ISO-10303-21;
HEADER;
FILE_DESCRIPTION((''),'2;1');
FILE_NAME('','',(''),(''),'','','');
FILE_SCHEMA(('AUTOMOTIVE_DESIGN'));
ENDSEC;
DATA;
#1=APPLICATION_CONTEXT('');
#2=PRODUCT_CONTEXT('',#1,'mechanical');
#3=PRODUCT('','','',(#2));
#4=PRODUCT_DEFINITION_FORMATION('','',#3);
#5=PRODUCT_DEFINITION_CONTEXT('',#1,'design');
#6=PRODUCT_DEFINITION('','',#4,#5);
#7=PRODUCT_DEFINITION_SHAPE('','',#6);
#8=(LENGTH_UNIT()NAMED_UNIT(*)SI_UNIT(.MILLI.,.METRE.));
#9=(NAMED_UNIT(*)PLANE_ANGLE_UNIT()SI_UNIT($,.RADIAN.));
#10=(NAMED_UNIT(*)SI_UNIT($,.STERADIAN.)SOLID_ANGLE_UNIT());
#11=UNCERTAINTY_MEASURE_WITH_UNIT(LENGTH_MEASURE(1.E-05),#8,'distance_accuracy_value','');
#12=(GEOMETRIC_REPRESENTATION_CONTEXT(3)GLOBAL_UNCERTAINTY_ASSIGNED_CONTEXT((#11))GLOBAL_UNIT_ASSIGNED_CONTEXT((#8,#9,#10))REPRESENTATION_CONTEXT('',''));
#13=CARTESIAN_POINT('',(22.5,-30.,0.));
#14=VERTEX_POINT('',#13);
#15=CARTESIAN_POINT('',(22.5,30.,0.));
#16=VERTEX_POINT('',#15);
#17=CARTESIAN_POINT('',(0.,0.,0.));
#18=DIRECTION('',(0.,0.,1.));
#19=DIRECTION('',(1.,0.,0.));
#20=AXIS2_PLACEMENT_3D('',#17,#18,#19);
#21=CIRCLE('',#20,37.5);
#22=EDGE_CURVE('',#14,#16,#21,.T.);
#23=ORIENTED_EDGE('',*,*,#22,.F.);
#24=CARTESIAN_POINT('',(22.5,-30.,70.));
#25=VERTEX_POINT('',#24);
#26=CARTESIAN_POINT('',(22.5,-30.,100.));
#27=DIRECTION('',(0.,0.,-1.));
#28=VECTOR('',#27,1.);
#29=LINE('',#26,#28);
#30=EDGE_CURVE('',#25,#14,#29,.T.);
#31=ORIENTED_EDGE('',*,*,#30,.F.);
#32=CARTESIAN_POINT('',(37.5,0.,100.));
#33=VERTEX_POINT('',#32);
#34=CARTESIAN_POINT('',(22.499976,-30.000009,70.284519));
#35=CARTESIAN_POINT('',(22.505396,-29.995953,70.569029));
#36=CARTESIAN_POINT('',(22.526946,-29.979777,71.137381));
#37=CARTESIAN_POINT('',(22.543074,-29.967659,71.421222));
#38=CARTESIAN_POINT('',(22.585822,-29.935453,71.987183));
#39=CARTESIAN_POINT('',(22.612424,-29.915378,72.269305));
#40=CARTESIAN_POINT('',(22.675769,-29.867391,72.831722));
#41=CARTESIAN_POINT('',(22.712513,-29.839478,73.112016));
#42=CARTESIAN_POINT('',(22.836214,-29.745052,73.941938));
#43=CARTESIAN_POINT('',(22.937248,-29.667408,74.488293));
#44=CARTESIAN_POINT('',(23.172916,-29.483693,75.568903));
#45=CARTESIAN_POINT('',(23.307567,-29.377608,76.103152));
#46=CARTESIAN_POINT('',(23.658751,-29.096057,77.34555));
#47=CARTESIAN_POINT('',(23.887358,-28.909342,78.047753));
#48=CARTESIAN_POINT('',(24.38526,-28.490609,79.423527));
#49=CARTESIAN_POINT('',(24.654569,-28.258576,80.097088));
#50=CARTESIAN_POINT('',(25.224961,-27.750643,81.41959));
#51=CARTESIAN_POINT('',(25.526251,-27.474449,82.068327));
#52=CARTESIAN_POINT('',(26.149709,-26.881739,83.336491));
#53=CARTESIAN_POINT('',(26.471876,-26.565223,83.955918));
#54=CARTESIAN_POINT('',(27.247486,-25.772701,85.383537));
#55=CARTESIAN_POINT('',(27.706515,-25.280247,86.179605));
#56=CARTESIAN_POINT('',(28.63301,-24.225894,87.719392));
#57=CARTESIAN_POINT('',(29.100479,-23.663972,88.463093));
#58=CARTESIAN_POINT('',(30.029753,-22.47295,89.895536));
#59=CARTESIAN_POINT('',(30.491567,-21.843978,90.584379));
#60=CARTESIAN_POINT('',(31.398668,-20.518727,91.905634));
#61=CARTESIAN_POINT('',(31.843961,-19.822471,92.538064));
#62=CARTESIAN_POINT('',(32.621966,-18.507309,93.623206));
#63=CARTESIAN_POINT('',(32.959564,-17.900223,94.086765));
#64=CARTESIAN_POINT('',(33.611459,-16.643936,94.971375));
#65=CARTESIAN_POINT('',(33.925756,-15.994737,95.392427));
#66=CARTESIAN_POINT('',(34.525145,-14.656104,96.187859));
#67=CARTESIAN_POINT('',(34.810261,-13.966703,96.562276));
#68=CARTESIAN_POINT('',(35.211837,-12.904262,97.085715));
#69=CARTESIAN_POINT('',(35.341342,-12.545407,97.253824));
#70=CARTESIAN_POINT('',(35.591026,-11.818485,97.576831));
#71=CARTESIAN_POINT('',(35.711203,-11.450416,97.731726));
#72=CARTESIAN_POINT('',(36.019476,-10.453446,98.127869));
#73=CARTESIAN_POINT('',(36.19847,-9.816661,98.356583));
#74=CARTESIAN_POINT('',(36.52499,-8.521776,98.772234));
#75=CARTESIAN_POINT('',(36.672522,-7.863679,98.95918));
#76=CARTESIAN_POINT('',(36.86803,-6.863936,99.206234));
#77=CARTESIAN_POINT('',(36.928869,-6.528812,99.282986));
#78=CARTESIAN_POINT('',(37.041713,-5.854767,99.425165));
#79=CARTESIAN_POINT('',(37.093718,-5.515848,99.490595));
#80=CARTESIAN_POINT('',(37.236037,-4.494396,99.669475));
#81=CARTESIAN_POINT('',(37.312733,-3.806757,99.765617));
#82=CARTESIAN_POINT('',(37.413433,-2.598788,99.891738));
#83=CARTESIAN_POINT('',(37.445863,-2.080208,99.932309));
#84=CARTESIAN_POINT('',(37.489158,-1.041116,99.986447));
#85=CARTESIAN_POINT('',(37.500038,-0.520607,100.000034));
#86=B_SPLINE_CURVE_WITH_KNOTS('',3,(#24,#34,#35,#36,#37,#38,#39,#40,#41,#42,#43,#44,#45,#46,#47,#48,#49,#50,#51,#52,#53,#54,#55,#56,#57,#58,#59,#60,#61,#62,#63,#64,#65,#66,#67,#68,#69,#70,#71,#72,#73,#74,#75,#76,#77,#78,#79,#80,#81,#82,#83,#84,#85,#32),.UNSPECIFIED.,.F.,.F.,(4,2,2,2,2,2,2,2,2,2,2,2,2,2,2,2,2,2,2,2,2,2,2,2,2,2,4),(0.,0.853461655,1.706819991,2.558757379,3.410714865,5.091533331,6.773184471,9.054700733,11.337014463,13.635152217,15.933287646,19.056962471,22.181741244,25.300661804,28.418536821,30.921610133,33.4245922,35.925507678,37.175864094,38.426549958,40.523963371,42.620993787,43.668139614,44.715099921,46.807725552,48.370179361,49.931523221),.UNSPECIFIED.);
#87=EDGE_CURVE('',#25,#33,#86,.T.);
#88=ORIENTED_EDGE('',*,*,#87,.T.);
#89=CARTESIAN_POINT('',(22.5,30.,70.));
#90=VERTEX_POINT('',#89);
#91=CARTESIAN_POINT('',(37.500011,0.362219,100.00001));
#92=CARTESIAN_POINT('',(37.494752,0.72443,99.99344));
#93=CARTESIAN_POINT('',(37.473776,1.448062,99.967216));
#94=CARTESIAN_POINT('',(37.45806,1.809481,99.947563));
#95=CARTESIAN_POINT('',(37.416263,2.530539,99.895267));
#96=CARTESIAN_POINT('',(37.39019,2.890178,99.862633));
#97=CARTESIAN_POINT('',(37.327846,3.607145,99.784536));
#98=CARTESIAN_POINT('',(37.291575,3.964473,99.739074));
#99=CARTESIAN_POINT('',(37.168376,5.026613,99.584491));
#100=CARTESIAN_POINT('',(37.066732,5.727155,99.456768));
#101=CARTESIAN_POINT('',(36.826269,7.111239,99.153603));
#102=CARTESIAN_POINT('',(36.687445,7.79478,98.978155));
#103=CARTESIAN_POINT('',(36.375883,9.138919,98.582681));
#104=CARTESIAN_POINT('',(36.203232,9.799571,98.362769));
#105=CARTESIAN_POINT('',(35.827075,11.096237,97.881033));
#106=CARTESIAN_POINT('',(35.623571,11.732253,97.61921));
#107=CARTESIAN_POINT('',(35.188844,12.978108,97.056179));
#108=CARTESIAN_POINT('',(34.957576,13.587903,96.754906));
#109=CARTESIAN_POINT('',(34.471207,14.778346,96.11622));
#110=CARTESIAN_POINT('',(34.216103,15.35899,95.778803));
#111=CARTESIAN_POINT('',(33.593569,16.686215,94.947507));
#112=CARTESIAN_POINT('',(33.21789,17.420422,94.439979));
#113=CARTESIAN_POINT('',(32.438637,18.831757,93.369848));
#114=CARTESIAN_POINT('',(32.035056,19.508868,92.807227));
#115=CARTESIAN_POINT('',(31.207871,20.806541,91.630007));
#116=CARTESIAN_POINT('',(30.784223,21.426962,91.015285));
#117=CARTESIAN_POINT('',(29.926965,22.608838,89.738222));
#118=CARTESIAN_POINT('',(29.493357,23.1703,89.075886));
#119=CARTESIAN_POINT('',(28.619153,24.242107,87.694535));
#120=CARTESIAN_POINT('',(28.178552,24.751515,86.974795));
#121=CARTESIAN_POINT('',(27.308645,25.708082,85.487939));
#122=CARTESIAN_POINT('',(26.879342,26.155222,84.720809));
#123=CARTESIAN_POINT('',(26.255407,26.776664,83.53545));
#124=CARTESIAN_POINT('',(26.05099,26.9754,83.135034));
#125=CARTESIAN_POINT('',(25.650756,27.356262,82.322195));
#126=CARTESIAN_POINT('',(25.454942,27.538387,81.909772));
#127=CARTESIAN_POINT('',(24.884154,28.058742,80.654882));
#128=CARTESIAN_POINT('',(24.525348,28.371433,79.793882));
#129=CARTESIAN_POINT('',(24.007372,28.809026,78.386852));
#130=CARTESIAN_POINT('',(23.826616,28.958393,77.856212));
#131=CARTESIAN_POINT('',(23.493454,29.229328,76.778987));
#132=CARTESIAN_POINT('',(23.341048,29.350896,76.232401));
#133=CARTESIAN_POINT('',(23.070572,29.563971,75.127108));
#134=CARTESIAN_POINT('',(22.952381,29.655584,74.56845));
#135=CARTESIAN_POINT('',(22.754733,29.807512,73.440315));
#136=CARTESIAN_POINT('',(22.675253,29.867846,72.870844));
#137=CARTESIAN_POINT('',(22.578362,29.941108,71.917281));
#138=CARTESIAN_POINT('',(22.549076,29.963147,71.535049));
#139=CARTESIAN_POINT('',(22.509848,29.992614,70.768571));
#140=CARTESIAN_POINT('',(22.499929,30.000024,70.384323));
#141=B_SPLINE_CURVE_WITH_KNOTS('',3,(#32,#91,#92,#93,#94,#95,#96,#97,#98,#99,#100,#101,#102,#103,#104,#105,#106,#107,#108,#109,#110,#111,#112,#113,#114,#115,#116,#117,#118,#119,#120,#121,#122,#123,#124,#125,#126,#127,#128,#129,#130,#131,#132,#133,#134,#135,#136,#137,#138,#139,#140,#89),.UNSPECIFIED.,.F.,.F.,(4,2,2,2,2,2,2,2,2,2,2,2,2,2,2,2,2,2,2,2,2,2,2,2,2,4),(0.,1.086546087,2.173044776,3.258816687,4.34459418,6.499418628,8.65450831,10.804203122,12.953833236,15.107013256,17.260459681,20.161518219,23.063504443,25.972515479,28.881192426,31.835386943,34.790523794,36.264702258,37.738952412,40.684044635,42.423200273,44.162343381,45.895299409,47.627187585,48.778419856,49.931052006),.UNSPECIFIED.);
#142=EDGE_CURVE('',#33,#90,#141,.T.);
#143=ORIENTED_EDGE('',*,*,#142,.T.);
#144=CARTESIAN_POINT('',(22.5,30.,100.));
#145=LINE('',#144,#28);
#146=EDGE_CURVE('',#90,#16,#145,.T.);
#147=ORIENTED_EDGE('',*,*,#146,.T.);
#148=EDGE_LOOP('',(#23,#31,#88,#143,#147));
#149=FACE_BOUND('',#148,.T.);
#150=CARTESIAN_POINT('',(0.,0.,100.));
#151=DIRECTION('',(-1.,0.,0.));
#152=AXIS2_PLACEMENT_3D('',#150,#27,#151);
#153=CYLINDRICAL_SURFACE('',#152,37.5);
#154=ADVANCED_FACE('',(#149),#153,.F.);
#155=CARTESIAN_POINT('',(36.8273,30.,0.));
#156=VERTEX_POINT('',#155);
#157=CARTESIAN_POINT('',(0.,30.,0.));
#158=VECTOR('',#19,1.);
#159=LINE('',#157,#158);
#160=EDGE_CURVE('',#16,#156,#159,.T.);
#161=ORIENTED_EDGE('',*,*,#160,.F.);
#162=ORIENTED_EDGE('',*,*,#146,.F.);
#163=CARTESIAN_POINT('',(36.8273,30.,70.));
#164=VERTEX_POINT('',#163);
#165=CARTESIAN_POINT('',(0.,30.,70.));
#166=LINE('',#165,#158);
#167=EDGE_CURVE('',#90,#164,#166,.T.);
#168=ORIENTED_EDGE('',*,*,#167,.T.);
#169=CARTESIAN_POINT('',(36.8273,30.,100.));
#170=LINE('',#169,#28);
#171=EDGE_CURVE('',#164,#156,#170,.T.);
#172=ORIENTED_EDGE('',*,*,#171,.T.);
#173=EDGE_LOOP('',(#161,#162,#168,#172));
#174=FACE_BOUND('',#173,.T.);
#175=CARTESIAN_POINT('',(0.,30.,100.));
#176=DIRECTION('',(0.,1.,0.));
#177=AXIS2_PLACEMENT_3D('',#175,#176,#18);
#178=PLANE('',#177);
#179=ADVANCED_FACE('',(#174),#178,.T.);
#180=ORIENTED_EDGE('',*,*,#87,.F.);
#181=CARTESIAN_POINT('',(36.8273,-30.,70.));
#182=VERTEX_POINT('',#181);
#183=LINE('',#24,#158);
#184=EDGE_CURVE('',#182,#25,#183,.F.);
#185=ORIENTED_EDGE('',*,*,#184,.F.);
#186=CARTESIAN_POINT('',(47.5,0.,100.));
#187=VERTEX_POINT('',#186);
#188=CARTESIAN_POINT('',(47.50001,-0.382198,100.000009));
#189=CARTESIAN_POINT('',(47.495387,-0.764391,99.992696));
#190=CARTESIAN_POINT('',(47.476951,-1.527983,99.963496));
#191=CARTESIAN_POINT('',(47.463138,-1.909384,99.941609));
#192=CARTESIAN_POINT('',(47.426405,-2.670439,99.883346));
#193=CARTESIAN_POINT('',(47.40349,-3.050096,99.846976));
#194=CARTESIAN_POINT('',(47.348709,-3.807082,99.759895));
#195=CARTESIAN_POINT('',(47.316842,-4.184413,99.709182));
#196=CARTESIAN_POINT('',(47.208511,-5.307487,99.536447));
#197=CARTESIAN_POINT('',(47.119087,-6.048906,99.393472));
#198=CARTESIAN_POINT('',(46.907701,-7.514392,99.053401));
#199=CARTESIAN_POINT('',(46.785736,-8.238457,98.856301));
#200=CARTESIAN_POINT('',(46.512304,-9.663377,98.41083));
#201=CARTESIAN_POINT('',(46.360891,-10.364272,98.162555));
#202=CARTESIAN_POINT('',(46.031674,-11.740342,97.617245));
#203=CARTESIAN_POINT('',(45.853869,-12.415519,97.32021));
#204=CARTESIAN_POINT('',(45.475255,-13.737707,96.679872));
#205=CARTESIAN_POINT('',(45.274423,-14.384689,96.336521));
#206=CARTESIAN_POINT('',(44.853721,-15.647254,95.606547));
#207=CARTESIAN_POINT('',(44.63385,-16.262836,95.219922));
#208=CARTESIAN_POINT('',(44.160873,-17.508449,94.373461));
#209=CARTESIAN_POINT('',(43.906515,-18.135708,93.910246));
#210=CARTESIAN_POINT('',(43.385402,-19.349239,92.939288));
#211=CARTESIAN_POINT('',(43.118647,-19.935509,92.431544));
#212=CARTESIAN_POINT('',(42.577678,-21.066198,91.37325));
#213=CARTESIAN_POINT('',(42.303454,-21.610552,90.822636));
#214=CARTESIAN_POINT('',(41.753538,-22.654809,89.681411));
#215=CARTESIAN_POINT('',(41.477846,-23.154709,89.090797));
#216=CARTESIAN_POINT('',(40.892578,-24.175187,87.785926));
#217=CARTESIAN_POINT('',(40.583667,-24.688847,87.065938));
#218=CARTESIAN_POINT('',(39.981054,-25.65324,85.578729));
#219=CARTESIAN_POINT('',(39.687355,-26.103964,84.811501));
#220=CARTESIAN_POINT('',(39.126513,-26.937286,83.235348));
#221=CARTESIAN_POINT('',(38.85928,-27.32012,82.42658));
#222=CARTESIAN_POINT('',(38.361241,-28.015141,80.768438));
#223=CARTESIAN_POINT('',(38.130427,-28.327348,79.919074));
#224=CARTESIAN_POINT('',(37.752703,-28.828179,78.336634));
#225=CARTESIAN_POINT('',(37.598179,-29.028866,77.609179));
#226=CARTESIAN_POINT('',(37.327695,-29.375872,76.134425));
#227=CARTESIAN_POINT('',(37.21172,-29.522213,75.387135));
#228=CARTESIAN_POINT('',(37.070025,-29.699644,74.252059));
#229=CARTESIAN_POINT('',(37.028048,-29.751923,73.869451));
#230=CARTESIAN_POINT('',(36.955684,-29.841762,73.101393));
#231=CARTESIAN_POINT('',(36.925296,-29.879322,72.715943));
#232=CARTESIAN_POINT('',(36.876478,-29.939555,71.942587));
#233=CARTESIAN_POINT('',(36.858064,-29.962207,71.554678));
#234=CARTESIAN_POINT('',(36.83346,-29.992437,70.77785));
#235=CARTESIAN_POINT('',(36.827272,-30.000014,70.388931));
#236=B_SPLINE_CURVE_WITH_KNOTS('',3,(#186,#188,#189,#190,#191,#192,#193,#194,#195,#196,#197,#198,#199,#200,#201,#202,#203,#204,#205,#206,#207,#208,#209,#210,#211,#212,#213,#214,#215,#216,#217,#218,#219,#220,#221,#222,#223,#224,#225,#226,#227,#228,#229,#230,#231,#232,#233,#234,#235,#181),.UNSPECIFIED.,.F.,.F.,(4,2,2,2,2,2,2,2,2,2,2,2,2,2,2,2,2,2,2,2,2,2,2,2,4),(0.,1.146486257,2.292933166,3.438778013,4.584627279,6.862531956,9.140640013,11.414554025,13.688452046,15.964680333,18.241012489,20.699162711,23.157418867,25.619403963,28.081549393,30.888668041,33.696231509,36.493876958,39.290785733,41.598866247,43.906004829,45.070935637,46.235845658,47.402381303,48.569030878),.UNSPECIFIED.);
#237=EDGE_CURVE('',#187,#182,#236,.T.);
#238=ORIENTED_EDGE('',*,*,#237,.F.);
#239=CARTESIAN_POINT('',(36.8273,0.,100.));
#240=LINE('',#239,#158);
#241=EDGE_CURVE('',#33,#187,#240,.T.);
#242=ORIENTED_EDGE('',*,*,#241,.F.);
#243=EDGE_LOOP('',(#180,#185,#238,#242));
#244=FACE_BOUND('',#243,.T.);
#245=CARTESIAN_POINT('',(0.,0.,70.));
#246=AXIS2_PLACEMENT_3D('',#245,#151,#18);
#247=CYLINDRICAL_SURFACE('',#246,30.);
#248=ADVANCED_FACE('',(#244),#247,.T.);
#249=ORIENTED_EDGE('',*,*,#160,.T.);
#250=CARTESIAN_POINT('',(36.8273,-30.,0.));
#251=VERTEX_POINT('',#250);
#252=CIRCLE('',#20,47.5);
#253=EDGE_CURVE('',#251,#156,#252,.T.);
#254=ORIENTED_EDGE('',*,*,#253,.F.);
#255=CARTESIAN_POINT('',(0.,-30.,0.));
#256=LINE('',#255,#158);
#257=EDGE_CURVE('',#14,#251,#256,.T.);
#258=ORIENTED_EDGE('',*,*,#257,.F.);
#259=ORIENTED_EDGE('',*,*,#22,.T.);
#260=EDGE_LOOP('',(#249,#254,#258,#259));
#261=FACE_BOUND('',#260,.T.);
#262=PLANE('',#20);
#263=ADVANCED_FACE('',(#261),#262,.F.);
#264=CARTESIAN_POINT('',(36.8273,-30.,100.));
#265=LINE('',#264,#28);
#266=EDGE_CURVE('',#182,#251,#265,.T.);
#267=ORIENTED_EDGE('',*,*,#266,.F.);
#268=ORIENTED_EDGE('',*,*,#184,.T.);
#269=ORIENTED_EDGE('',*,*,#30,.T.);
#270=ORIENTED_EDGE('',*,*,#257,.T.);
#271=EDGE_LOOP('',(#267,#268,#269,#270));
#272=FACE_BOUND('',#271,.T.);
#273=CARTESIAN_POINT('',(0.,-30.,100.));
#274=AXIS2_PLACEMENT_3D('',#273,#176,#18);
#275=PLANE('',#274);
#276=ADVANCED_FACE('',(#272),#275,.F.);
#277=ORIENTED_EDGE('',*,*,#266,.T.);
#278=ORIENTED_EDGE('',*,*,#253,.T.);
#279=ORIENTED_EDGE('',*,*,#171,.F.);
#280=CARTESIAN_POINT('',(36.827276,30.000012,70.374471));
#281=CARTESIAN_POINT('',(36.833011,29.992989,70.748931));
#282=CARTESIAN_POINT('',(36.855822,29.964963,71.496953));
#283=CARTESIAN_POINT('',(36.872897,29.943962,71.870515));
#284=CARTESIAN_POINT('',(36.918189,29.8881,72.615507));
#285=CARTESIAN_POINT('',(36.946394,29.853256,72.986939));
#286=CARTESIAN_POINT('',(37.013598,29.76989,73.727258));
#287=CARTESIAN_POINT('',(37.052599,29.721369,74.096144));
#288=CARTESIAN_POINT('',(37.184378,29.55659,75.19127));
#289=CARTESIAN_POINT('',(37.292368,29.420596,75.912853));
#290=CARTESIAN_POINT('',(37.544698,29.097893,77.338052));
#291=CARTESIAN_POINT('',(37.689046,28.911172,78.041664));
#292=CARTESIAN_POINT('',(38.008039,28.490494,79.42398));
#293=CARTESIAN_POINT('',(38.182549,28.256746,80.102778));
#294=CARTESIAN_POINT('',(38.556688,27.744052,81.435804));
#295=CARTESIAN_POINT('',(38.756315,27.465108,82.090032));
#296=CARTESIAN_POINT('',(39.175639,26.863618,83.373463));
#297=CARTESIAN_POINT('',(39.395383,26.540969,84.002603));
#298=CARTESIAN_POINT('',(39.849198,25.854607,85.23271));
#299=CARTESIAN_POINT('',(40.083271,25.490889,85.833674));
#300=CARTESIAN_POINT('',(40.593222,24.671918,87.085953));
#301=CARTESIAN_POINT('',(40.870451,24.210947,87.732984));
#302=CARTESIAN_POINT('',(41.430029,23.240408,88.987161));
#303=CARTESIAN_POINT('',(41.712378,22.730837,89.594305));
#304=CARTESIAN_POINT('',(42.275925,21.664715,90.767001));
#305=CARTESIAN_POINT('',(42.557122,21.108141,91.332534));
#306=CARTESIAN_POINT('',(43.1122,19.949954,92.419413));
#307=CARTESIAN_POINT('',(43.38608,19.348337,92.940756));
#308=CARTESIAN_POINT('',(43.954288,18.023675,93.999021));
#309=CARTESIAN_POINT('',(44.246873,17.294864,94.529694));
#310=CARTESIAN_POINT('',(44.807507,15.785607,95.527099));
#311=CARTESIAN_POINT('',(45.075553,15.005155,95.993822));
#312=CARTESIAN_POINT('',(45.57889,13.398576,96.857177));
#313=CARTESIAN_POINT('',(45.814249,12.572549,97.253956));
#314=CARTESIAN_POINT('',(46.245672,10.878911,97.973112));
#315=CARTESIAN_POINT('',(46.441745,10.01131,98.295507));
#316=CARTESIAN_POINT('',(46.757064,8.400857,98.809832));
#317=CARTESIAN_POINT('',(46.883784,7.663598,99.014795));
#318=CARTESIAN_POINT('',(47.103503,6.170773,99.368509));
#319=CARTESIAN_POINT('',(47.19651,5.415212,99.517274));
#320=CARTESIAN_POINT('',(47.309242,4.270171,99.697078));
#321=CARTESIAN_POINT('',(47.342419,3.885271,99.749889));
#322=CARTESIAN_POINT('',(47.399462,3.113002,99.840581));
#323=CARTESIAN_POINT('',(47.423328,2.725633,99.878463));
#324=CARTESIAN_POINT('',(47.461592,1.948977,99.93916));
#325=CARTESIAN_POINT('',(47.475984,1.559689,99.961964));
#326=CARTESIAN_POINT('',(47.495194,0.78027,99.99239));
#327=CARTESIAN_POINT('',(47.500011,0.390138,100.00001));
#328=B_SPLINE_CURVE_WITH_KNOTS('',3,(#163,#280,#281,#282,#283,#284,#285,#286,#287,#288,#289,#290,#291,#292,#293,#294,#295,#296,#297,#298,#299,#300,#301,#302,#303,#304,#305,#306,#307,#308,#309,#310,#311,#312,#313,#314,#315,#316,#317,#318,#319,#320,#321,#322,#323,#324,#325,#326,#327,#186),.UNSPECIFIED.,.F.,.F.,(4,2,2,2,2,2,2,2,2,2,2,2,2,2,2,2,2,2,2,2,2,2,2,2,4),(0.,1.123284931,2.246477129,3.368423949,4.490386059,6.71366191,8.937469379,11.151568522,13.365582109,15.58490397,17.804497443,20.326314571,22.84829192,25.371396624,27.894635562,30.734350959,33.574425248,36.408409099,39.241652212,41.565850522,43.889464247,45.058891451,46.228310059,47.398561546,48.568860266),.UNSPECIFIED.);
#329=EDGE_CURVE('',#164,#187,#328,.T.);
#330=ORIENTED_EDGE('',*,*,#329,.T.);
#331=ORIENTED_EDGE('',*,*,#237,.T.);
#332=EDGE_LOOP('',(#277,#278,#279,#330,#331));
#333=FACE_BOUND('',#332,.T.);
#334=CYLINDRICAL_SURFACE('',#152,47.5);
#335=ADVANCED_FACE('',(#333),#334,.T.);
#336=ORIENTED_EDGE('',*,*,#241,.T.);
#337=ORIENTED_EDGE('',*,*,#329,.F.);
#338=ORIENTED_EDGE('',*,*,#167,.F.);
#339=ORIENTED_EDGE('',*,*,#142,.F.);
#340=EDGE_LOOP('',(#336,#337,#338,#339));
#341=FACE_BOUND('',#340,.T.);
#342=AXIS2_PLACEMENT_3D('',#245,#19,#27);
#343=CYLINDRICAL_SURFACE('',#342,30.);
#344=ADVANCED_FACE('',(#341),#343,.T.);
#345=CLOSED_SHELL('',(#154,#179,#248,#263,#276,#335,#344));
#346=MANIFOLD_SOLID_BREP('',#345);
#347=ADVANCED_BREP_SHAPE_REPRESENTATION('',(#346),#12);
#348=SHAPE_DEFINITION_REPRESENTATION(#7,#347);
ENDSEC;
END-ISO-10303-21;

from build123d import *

# Parameters (mm, degrees)
BOSS_EXTRU_1_DEPTH = 100
CONG_1_R           = 30


with BuildPart() as part:
    # Esquisse1 → Boss.-Extru.1 (new body)
    with BuildSketch(Plane.XY):
        with BuildLine():
            Line((36.827299657, 30), (22.5, 30))
            ThreePointArc((22.5, 30), (33.541019662, 16.770509831), (37.5, 0))
            ThreePointArc((37.5, 0), (33.541019662, -16.770509831), (22.5, -30))
            Line((22.5, -30), (36.827299657, -30))
            ThreePointArc((36.827299657, -30), (44.752355992, -15.920949505), (47.5, 0))
            ThreePointArc((47.5, 0), (44.752355992, 15.920949505), (36.827299657, 30))
        make_face()
    extrude(amount=BOSS_EXTRU_1_DEPTH)

    # Congé1
    # the kernel refuses this fillet: 30 mm, written as the material it takes off along each edge
    with BuildSketch(Plane(origin=(111.827299657, 30, 100), x_dir=(0, 0, -1), z_dir=(-1, 0, 0))) as cong_1_piece_1:
        with BuildLine():
            CenterArc((CONG_1_R, CONG_1_R), CONG_1_R, 180, 90)
            Line((0, CONG_1_R), (0, 0))
            Line((0, 0), (CONG_1_R, 0))
        make_face()
    extrude(amount=164.327299657, mode=Mode.SUBTRACT)
    with BuildSketch(Plane(origin=(-52.5, -30, 100), x_dir=(0, 1, 0), z_dir=(1, 0, 0))) as cong_1_piece_2:
        with BuildLine():
            CenterArc((CONG_1_R, -CONG_1_R), CONG_1_R, 90, 90)
            Line((0, -CONG_1_R), (0, 0))
            Line((0, 0), (CONG_1_R, 0))
        make_face()
    extrude(amount=164.327299657, mode=Mode.SUBTRACT)


solid = part.part
